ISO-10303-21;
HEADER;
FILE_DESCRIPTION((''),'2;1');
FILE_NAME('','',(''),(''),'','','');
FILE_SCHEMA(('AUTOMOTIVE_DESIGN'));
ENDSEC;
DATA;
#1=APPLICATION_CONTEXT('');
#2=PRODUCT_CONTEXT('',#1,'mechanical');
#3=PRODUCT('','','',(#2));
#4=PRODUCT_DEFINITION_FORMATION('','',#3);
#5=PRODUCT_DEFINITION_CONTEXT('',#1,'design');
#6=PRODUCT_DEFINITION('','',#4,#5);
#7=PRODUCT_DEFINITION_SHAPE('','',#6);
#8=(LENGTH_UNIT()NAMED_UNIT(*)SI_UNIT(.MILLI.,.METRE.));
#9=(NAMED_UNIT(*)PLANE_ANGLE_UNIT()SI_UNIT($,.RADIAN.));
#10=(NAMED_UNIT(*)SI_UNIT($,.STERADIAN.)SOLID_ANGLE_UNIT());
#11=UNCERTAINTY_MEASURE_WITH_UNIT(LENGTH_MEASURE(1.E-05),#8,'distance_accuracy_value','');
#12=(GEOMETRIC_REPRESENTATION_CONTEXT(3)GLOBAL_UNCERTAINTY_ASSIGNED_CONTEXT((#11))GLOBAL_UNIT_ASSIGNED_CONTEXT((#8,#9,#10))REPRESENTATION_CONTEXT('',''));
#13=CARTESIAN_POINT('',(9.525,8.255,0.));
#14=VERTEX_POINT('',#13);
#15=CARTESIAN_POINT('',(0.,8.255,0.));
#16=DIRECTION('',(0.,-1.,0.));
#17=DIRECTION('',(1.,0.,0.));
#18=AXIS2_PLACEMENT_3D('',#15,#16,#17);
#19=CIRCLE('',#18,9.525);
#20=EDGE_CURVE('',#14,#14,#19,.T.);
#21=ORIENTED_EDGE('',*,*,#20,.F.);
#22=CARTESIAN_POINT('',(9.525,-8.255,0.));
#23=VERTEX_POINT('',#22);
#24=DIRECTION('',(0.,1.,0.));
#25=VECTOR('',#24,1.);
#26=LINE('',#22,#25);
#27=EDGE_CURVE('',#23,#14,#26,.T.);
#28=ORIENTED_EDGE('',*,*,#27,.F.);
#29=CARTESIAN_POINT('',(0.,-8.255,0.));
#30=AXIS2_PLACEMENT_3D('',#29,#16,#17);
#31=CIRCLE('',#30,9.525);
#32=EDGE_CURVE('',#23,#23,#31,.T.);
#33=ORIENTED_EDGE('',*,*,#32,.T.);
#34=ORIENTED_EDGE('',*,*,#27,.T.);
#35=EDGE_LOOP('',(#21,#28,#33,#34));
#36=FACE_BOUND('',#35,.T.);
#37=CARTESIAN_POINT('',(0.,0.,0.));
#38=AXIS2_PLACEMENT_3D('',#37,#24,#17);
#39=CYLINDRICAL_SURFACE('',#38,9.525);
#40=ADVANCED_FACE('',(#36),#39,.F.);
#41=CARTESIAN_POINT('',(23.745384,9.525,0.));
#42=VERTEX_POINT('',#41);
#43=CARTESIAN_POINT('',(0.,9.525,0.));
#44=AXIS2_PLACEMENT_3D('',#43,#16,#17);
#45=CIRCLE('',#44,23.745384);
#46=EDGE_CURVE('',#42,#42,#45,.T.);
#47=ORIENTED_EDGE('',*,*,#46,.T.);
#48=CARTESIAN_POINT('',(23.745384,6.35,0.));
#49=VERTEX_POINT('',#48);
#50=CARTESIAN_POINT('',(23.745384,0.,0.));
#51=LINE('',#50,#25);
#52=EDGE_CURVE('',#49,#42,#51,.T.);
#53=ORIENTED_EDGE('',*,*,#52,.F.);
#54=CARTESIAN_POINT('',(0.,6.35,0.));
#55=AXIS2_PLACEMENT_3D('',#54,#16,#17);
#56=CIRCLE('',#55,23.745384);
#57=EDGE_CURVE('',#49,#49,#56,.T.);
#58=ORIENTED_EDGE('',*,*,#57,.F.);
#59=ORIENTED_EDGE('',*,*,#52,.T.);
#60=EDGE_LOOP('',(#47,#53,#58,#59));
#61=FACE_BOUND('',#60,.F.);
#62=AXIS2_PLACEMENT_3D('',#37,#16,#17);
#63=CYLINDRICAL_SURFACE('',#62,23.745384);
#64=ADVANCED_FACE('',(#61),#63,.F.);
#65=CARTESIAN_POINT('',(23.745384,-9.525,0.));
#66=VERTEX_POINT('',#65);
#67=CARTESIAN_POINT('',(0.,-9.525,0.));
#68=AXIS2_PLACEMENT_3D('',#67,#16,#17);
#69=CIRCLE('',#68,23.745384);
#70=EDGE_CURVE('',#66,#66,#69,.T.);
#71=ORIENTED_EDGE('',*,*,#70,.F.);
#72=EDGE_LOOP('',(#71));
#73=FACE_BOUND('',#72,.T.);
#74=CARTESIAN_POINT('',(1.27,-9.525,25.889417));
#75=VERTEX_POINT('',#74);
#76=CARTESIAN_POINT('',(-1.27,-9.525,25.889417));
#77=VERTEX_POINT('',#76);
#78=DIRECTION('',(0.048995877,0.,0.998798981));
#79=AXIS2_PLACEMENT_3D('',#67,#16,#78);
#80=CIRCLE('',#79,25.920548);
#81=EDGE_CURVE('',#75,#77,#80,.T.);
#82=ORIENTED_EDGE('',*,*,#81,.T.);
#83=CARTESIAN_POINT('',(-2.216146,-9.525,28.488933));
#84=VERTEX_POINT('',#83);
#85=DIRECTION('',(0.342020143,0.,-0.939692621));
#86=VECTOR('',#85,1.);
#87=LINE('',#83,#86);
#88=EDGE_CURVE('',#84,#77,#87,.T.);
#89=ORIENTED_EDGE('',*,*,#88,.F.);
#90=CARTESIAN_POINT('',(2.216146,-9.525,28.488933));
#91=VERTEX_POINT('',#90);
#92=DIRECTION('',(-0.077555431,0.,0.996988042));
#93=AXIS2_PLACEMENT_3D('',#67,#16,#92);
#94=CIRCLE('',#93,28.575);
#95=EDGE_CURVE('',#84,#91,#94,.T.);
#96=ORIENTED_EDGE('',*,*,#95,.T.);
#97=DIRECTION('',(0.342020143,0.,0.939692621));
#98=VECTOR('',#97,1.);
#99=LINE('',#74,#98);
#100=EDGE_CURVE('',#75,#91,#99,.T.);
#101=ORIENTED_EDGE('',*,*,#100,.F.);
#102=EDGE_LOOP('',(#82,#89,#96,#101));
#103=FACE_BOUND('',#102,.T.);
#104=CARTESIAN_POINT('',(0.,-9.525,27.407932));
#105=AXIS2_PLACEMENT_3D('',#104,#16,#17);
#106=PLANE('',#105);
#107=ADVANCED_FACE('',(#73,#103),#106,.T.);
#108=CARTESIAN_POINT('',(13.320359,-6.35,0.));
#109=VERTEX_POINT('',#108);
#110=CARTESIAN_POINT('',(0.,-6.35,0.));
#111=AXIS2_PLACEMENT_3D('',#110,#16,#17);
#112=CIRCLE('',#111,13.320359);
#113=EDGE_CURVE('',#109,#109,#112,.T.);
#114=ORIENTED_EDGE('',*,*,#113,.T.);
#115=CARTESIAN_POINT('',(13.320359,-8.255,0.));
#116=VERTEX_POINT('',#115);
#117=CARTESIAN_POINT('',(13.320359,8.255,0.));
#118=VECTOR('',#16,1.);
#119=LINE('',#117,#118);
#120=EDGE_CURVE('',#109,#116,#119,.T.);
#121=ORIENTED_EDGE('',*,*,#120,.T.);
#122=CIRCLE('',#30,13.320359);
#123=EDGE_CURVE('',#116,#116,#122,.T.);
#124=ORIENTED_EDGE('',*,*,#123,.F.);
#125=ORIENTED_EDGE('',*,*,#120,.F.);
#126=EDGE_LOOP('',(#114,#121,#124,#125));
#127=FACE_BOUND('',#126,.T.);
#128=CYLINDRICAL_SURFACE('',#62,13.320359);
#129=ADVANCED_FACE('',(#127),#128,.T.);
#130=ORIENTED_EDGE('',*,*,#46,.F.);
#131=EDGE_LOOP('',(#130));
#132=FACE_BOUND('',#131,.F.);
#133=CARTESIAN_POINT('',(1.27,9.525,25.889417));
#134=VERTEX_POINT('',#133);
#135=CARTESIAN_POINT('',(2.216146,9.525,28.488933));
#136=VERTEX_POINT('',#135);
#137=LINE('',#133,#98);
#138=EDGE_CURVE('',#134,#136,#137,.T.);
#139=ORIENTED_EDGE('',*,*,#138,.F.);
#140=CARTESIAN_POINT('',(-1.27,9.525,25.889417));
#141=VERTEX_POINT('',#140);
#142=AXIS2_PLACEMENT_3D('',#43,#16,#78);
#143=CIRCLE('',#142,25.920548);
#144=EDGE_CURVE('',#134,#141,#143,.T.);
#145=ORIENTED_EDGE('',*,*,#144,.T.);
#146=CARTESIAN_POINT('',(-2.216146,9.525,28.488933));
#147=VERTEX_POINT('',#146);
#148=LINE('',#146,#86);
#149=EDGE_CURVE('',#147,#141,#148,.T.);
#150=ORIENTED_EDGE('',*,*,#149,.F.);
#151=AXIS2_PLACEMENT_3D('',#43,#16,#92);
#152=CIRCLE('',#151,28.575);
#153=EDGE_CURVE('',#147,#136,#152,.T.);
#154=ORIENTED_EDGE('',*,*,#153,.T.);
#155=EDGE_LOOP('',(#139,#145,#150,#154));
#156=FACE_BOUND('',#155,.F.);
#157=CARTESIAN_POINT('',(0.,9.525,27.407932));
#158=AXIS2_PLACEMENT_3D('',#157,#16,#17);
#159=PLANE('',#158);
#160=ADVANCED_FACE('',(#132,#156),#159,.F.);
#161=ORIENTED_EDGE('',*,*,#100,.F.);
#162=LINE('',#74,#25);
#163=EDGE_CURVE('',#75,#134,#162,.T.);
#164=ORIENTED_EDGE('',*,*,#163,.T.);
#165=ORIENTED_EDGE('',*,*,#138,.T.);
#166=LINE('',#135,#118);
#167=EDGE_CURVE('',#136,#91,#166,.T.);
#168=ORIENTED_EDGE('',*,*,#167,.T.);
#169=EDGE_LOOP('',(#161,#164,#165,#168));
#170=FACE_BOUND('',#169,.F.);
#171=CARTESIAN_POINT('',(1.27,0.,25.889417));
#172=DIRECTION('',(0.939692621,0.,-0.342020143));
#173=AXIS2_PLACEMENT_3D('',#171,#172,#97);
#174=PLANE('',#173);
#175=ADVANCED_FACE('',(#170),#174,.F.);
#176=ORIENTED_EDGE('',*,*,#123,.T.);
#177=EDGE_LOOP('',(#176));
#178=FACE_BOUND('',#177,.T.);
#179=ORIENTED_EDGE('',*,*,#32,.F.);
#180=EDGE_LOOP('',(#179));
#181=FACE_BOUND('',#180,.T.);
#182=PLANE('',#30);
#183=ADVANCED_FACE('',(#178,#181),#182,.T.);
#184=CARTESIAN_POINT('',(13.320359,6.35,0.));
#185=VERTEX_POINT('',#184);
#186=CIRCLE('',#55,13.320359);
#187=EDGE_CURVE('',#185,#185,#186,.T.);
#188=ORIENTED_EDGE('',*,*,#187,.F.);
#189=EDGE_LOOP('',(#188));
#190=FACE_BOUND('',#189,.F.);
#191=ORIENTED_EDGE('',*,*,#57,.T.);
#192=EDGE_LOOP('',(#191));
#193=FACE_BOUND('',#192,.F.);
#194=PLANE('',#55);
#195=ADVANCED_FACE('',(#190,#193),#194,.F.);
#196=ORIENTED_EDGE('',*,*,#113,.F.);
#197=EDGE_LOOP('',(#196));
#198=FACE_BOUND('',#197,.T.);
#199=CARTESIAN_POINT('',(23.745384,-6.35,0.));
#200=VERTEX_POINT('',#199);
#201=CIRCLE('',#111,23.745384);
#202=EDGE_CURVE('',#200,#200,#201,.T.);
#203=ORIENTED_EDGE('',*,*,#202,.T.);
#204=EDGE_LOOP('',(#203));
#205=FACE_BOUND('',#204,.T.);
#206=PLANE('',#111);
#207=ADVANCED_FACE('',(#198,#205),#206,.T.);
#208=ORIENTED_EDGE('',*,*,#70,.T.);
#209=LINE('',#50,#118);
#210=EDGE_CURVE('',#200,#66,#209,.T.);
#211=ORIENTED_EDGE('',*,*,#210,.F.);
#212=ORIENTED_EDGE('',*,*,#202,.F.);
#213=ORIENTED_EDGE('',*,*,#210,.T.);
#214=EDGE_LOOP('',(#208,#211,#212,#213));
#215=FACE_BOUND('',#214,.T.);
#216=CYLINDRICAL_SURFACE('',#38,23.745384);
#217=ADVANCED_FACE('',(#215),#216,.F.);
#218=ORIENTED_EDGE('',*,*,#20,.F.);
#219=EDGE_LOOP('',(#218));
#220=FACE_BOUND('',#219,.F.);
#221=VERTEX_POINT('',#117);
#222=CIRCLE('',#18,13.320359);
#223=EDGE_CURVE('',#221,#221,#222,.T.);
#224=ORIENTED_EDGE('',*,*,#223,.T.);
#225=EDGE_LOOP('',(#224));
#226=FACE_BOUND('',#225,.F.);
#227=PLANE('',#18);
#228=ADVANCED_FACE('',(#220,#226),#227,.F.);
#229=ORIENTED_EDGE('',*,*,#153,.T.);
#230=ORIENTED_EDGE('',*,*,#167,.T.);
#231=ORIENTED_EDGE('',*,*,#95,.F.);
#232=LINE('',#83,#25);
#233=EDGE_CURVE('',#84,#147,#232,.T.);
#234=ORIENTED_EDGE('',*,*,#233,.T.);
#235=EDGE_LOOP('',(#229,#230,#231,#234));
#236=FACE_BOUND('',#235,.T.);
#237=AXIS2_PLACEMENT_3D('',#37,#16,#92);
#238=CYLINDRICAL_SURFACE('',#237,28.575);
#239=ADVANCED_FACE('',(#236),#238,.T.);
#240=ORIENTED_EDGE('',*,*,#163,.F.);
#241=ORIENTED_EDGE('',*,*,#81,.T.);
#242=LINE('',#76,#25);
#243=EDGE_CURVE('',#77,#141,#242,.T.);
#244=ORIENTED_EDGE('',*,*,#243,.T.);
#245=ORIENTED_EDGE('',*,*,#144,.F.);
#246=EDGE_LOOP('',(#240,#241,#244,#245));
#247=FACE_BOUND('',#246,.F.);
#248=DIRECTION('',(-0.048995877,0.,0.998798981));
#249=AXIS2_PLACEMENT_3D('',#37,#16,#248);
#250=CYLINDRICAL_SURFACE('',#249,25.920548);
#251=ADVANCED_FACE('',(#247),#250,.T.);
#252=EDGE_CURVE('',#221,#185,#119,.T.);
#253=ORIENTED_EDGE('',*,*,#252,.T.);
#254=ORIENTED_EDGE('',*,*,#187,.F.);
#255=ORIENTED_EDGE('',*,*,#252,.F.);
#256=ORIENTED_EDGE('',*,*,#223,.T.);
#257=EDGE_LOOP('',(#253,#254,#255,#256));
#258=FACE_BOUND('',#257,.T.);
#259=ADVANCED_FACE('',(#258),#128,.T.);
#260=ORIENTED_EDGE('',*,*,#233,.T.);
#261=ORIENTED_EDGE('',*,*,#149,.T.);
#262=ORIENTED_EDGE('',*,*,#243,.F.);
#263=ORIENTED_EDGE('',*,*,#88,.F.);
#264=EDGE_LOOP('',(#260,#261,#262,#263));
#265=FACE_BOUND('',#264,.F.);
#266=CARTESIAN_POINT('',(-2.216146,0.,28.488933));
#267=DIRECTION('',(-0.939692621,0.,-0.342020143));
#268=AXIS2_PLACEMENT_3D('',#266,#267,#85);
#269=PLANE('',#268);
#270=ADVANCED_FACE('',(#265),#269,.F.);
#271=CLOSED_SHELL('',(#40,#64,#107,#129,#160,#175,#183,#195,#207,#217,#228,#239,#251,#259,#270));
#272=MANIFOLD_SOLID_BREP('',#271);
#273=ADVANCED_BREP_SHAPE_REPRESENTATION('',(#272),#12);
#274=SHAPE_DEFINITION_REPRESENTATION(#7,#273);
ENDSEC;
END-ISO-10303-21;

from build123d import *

# Parameters (mm, degrees)
F0_R     = 23.7453835504
F0_R_2   = 13.3203594212
F1_DEPTH = 6.35
F2_DEPTH = 9.525
F0_R_3   = 9.525
F3_DEPTH = 8.255
F4_DEPTH = 9.525
F5_DEPTH = 9.525


# Not quite as in the source:
# - a feature names something its author has since deleted; it is built from what else it names


with BuildPart() as f1:
    # F0 (on Front) → F1 (new body, symmetric)
    with BuildSketch(Plane.XZ):
        Circle(F0_R)
        Circle(F0_R_2, mode=Mode.SUBTRACT)
    extrude(amount=F1_DEPTH, both=True)

    # F0 (on Front) → F2 (join, symmetric)
    with BuildSketch(Plane.XZ):
        with BuildLine():
            ThreePointArc((25.9205484169, 0), (18.7722391675, 17.8739437974), (1.27, 25.8894173405))
            ThreePointArc((1.27, 25.8894173405), (0, 25.9205484169), (-1.27, 25.8894173405))
            ThreePointArc((-1.27, 25.8894173405), (-17.8739437974, -18.7722391675), (25.9205484169, 0))
        make_face()
        Circle(F0_R, mode=Mode.SUBTRACT)
    extrude(amount=F2_DEPTH, both=True)

    # F0 (on Front) → F3 (join, symmetric)
    with BuildSketch(Plane.XZ):
        Circle(F0_R_2)
        Circle(F0_R_3, mode=Mode.SUBTRACT)
    extrude(amount=F3_DEPTH, both=True)

    # F0 (on Front) → F4 (join, symmetric)
    with BuildSketch(Plane.XZ):
        with BuildLine():
            Line((1.27, 25.8894173405), (2.2161464291, 28.48893329))
            ThreePointArc((2.2161464291, 28.48893329), (0, 28.575), (-2.2161464291, 28.48893329))
            Line((-2.2161464291, 28.48893329), (-1.27, 25.8894173405))
            ThreePointArc((-1.27, 25.8894173405), (0, 25.9205484169), (1.27, 25.8894173405))
        make_face()
        with BuildLine():
            ThreePointArc((-2.2161464291, 28.48893329), (-19.406239213, -20.9744726896), (28.575, 0))
            ThreePointArc((28.575, 0), (20.9744726896, 19.406239213), (2.2161464291, 28.48893329))
            Line((2.2161464291, 28.48893329), (1.27, 25.8894173405))
            ThreePointArc((1.27, 25.8894173405), (18.7722391675, 17.8739437974), (25.9205484169, 0))
            ThreePointArc((25.9205484169, 0), (-17.8739437974, -18.7722391675), (-1.27, 25.8894173405))
            Line((-1.27, 25.8894173405), (-2.2161464291, 28.48893329))
        make_face()
    extrude(amount=F4_DEPTH, both=True)

    # F0 (on Front) → F5 (cut, symmetric)
    with BuildSketch(Plane.XZ):
        with BuildLine():
            Line((1.27, 25.8894173405), (2.2161464291, 28.48893329))
            ThreePointArc((2.2161464291, 28.48893329), (0, 28.575), (-2.2161464291, 28.48893329))
            Line((-2.2161464291, 28.48893329), (-1.27, 25.8894173405))
            ThreePointArc((-1.27, 25.8894173405), (0, 25.9205484169), (1.27, 25.8894173405))
        make_face()
    extrude(amount=F5_DEPTH, both=True, mode=Mode.SUBTRACT)


solid = f1.part
